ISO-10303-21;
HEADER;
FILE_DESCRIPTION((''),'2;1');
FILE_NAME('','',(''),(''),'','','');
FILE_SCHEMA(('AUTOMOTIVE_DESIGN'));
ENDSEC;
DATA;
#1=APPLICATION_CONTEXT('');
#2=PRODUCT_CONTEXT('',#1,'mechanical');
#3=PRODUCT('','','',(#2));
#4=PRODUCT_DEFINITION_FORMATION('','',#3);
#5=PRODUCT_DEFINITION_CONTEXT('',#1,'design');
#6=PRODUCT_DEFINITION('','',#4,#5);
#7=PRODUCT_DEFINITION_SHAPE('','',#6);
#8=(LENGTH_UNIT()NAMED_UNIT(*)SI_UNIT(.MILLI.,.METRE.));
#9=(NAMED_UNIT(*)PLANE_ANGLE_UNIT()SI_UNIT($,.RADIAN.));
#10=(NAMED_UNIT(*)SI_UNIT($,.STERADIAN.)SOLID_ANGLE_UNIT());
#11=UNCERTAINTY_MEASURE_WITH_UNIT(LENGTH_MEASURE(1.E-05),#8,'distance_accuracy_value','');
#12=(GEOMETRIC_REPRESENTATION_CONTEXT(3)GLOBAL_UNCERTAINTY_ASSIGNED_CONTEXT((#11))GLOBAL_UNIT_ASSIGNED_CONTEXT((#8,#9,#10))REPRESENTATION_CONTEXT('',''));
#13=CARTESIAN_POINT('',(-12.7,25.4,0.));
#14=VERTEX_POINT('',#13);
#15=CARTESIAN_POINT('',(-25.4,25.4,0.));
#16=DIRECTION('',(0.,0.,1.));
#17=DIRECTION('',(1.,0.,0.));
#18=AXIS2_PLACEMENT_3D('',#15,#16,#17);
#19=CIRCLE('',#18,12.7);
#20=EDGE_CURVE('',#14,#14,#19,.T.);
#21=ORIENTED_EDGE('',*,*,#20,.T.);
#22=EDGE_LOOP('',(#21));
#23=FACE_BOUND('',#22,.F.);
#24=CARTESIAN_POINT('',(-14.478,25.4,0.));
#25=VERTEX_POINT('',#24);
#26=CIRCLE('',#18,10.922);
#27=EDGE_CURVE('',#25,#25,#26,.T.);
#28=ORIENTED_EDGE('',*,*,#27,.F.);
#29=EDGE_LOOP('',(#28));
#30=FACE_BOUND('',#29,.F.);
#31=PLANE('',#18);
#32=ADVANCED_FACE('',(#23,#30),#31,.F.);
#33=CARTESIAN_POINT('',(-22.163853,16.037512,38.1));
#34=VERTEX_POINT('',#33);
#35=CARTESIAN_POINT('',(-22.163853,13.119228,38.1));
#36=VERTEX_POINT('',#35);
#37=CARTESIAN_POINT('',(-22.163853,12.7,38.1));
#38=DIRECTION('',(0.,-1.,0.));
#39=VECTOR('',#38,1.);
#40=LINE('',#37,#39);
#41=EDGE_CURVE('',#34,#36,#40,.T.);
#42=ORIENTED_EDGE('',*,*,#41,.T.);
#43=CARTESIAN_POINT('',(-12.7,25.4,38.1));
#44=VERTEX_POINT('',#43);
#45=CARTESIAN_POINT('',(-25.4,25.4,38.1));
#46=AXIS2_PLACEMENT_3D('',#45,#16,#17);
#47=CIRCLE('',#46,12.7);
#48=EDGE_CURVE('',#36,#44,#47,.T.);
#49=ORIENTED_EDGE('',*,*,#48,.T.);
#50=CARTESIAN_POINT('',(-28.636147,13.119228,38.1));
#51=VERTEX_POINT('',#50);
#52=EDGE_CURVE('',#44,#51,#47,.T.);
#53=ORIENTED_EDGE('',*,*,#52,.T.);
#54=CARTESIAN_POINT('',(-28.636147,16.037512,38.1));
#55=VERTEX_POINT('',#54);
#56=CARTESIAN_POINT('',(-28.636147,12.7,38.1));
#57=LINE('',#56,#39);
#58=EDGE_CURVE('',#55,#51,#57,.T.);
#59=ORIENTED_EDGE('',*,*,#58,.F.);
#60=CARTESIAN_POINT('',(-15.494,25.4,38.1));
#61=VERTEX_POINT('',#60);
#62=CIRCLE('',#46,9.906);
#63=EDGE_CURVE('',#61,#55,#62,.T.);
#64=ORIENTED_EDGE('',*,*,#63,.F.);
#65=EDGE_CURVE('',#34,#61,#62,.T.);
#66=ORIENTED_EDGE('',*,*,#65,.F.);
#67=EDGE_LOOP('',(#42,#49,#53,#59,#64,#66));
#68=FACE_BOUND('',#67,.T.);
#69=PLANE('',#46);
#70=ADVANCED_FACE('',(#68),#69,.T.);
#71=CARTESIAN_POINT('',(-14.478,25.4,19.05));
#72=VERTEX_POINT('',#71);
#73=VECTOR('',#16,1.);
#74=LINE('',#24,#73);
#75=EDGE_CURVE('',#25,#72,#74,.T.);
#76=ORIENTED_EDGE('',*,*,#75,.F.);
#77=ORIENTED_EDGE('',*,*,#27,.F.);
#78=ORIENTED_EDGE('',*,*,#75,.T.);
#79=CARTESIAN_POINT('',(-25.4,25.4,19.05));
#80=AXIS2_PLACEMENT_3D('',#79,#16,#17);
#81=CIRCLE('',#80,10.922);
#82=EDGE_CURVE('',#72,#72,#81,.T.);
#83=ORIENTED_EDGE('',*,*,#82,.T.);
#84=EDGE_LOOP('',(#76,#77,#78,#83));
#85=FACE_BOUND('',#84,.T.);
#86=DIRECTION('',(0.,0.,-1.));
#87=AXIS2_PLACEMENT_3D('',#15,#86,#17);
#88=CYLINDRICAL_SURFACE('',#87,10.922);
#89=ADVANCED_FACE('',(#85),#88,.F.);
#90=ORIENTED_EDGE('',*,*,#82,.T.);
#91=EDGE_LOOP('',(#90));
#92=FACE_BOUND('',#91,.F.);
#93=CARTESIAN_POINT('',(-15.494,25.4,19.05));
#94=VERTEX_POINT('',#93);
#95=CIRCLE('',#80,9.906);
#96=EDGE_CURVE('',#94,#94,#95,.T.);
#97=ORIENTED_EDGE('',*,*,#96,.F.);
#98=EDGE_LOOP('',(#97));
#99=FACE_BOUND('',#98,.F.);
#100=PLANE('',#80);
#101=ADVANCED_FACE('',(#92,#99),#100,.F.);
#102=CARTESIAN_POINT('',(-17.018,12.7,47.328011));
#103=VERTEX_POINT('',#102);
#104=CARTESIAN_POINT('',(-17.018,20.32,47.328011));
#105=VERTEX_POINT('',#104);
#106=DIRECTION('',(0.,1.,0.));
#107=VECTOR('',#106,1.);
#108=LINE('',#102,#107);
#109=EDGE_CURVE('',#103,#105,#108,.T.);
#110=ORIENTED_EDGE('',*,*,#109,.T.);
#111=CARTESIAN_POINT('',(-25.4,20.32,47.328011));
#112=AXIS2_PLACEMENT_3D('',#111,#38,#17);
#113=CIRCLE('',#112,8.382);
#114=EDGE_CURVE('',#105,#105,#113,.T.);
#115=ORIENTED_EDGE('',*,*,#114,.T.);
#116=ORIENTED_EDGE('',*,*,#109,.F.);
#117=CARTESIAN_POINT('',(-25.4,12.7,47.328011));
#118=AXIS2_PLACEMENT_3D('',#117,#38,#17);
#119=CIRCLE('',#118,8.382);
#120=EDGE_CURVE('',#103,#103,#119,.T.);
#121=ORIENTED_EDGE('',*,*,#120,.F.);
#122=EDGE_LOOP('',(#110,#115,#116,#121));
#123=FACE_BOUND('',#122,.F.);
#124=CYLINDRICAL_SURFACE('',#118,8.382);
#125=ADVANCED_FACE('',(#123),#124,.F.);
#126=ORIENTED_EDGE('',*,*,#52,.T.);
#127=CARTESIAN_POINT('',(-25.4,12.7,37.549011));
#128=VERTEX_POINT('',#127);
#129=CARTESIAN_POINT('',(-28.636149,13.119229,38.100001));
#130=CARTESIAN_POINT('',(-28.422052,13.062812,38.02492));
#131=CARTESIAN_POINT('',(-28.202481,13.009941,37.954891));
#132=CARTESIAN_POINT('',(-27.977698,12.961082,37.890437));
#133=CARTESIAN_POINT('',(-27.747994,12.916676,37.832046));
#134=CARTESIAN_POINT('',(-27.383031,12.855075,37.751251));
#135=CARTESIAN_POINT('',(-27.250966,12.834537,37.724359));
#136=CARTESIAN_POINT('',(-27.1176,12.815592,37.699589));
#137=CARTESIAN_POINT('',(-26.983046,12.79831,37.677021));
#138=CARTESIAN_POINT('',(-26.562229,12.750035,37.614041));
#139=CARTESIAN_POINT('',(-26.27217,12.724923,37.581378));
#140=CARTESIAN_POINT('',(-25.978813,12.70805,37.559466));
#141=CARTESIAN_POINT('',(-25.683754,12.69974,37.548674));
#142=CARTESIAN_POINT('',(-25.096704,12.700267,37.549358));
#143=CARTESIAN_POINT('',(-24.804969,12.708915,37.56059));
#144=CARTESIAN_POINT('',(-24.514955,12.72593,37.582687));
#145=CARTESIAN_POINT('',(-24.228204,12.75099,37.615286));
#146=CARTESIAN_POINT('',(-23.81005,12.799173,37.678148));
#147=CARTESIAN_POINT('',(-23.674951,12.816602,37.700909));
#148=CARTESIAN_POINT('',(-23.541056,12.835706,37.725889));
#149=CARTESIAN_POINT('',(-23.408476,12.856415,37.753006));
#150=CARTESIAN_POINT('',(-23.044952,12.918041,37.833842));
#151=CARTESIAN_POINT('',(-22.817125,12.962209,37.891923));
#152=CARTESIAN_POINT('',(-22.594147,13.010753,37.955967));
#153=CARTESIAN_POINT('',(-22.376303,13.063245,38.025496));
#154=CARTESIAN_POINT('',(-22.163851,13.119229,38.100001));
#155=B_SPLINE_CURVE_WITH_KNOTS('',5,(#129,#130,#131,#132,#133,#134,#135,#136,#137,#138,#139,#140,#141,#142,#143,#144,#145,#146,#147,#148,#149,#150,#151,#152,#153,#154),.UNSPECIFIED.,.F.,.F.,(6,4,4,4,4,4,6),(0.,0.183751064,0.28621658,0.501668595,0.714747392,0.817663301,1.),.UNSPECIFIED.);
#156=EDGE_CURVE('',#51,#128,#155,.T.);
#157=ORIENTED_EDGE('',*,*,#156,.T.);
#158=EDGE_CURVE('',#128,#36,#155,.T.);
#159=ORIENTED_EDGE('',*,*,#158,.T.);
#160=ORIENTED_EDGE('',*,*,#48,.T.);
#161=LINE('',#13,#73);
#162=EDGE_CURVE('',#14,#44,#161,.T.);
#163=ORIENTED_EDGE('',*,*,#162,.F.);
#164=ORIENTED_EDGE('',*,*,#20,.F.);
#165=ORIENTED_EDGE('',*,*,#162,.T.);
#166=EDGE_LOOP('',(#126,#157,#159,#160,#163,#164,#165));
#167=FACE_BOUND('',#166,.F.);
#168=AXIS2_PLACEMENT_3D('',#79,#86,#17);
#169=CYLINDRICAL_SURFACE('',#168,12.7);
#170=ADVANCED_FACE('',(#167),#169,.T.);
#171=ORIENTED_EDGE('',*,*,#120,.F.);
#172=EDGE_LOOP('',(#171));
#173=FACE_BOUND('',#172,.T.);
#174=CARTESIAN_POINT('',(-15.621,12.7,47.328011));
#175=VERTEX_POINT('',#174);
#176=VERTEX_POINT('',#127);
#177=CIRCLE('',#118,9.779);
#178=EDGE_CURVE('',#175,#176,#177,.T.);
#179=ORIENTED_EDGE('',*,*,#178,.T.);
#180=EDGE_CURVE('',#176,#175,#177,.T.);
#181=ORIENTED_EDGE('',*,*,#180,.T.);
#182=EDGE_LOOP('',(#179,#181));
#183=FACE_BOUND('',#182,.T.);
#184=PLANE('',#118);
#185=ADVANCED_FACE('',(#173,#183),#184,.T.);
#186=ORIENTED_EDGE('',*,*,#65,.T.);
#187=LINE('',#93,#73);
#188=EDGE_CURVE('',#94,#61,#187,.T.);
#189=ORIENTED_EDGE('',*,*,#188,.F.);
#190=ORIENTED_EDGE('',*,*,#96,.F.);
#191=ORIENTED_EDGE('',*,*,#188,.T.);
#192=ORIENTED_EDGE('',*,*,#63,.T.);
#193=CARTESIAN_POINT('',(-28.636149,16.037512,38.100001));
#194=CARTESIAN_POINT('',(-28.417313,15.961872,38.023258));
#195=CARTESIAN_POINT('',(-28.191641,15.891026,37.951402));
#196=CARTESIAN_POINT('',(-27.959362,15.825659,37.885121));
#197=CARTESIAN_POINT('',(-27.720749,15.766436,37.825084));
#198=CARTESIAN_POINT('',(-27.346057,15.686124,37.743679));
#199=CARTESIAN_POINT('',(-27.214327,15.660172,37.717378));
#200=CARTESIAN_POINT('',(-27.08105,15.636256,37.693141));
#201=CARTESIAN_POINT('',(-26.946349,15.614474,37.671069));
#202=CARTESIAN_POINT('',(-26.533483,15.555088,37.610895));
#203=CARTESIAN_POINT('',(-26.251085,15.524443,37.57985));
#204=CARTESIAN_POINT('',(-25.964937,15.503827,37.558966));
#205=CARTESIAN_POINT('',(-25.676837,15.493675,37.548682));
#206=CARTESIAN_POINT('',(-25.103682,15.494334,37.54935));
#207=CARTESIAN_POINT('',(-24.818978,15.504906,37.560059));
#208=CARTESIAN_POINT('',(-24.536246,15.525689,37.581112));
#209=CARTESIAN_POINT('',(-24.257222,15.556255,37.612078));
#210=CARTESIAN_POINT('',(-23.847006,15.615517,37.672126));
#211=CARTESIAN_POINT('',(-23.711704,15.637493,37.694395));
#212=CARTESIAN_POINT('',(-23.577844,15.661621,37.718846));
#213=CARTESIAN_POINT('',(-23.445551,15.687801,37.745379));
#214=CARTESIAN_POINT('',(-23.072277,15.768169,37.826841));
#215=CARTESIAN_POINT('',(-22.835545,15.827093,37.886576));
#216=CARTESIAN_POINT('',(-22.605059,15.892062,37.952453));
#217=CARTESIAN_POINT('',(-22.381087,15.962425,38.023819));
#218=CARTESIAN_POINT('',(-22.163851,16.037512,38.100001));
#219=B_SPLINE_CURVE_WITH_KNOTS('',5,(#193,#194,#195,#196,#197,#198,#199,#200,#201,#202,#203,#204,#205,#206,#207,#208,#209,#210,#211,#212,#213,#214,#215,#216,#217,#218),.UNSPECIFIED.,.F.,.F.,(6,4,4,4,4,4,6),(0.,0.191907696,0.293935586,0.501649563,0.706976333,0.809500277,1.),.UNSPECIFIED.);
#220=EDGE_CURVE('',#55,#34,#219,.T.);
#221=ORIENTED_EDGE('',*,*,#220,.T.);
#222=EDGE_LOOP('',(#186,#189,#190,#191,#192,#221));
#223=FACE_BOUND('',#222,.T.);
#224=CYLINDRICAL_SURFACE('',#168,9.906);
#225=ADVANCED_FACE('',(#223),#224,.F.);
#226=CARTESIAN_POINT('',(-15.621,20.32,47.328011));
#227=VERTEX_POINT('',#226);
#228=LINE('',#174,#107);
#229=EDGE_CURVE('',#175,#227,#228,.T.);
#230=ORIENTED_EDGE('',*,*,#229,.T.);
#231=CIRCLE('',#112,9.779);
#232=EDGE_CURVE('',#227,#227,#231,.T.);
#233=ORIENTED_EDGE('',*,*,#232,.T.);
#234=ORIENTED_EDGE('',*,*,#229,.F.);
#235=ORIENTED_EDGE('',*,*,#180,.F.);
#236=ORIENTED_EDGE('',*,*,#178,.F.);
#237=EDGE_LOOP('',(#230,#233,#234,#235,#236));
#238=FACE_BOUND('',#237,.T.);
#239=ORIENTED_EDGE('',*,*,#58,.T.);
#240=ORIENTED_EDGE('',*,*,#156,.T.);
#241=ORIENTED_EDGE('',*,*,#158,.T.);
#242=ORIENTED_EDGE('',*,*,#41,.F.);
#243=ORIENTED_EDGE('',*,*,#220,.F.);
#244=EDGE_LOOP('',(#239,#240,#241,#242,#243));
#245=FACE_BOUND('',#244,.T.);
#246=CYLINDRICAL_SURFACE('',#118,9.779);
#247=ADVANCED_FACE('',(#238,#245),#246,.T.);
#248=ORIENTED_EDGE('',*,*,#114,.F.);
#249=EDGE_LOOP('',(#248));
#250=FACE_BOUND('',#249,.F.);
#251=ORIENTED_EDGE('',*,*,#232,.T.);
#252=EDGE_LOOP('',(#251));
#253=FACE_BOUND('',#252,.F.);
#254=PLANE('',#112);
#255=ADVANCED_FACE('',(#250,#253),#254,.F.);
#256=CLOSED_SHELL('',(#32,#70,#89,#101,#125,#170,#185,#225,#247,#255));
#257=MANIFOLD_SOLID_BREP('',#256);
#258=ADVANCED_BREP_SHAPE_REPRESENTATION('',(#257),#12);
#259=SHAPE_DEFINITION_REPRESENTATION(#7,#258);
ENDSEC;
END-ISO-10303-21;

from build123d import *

# Parameters (mm, degrees)
F0_R     = 12.7
F0_R_2   = 10.922
F1_DEPTH = 19.05
F3_R     = 9.779
F3_R_2   = 8.382
F4_DEPTH = 7.62
F5_R     = 12.7
F5_R_2   = 9.906
F6_DEPTH = 19.05


with BuildPart() as f1:
    # F0 (on Top) → F1 (new body)
    with BuildSketch(Plane.XY):
        with Locations((-25.4, 25.4)):
            Circle(F0_R)
        with Locations((-25.4, 25.4)):
            Circle(F0_R_2, mode=Mode.SUBTRACT)
    extrude(amount=F1_DEPTH)



with BuildPart() as f4:
    # F3 (on offset) → F4 (new body)
    with BuildSketch(Plane.XZ.offset(-12.7)):
        with Locations((-25.4, 47.3280113715)):
            Circle(F3_R)
        with Locations((-25.4, 47.3280113715)):
            Circle(F3_R_2, mode=Mode.SUBTRACT)
    extrude(amount=-F4_DEPTH)


with BuildPart() as f1_1:
    add(f1.part)

    add(f4.part)  # F6 merges F4
    # F5 (on face) → F6 (join)
    with BuildSketch(Plane.XY.offset(19.05)):
        with Locations((-25.4, 25.4)):
            Circle(F5_R)
        with Locations((-25.4, 25.4)):
            Circle(F5_R_2, mode=Mode.SUBTRACT)
    extrude(amount=F6_DEPTH)


solid = f1_1.part
